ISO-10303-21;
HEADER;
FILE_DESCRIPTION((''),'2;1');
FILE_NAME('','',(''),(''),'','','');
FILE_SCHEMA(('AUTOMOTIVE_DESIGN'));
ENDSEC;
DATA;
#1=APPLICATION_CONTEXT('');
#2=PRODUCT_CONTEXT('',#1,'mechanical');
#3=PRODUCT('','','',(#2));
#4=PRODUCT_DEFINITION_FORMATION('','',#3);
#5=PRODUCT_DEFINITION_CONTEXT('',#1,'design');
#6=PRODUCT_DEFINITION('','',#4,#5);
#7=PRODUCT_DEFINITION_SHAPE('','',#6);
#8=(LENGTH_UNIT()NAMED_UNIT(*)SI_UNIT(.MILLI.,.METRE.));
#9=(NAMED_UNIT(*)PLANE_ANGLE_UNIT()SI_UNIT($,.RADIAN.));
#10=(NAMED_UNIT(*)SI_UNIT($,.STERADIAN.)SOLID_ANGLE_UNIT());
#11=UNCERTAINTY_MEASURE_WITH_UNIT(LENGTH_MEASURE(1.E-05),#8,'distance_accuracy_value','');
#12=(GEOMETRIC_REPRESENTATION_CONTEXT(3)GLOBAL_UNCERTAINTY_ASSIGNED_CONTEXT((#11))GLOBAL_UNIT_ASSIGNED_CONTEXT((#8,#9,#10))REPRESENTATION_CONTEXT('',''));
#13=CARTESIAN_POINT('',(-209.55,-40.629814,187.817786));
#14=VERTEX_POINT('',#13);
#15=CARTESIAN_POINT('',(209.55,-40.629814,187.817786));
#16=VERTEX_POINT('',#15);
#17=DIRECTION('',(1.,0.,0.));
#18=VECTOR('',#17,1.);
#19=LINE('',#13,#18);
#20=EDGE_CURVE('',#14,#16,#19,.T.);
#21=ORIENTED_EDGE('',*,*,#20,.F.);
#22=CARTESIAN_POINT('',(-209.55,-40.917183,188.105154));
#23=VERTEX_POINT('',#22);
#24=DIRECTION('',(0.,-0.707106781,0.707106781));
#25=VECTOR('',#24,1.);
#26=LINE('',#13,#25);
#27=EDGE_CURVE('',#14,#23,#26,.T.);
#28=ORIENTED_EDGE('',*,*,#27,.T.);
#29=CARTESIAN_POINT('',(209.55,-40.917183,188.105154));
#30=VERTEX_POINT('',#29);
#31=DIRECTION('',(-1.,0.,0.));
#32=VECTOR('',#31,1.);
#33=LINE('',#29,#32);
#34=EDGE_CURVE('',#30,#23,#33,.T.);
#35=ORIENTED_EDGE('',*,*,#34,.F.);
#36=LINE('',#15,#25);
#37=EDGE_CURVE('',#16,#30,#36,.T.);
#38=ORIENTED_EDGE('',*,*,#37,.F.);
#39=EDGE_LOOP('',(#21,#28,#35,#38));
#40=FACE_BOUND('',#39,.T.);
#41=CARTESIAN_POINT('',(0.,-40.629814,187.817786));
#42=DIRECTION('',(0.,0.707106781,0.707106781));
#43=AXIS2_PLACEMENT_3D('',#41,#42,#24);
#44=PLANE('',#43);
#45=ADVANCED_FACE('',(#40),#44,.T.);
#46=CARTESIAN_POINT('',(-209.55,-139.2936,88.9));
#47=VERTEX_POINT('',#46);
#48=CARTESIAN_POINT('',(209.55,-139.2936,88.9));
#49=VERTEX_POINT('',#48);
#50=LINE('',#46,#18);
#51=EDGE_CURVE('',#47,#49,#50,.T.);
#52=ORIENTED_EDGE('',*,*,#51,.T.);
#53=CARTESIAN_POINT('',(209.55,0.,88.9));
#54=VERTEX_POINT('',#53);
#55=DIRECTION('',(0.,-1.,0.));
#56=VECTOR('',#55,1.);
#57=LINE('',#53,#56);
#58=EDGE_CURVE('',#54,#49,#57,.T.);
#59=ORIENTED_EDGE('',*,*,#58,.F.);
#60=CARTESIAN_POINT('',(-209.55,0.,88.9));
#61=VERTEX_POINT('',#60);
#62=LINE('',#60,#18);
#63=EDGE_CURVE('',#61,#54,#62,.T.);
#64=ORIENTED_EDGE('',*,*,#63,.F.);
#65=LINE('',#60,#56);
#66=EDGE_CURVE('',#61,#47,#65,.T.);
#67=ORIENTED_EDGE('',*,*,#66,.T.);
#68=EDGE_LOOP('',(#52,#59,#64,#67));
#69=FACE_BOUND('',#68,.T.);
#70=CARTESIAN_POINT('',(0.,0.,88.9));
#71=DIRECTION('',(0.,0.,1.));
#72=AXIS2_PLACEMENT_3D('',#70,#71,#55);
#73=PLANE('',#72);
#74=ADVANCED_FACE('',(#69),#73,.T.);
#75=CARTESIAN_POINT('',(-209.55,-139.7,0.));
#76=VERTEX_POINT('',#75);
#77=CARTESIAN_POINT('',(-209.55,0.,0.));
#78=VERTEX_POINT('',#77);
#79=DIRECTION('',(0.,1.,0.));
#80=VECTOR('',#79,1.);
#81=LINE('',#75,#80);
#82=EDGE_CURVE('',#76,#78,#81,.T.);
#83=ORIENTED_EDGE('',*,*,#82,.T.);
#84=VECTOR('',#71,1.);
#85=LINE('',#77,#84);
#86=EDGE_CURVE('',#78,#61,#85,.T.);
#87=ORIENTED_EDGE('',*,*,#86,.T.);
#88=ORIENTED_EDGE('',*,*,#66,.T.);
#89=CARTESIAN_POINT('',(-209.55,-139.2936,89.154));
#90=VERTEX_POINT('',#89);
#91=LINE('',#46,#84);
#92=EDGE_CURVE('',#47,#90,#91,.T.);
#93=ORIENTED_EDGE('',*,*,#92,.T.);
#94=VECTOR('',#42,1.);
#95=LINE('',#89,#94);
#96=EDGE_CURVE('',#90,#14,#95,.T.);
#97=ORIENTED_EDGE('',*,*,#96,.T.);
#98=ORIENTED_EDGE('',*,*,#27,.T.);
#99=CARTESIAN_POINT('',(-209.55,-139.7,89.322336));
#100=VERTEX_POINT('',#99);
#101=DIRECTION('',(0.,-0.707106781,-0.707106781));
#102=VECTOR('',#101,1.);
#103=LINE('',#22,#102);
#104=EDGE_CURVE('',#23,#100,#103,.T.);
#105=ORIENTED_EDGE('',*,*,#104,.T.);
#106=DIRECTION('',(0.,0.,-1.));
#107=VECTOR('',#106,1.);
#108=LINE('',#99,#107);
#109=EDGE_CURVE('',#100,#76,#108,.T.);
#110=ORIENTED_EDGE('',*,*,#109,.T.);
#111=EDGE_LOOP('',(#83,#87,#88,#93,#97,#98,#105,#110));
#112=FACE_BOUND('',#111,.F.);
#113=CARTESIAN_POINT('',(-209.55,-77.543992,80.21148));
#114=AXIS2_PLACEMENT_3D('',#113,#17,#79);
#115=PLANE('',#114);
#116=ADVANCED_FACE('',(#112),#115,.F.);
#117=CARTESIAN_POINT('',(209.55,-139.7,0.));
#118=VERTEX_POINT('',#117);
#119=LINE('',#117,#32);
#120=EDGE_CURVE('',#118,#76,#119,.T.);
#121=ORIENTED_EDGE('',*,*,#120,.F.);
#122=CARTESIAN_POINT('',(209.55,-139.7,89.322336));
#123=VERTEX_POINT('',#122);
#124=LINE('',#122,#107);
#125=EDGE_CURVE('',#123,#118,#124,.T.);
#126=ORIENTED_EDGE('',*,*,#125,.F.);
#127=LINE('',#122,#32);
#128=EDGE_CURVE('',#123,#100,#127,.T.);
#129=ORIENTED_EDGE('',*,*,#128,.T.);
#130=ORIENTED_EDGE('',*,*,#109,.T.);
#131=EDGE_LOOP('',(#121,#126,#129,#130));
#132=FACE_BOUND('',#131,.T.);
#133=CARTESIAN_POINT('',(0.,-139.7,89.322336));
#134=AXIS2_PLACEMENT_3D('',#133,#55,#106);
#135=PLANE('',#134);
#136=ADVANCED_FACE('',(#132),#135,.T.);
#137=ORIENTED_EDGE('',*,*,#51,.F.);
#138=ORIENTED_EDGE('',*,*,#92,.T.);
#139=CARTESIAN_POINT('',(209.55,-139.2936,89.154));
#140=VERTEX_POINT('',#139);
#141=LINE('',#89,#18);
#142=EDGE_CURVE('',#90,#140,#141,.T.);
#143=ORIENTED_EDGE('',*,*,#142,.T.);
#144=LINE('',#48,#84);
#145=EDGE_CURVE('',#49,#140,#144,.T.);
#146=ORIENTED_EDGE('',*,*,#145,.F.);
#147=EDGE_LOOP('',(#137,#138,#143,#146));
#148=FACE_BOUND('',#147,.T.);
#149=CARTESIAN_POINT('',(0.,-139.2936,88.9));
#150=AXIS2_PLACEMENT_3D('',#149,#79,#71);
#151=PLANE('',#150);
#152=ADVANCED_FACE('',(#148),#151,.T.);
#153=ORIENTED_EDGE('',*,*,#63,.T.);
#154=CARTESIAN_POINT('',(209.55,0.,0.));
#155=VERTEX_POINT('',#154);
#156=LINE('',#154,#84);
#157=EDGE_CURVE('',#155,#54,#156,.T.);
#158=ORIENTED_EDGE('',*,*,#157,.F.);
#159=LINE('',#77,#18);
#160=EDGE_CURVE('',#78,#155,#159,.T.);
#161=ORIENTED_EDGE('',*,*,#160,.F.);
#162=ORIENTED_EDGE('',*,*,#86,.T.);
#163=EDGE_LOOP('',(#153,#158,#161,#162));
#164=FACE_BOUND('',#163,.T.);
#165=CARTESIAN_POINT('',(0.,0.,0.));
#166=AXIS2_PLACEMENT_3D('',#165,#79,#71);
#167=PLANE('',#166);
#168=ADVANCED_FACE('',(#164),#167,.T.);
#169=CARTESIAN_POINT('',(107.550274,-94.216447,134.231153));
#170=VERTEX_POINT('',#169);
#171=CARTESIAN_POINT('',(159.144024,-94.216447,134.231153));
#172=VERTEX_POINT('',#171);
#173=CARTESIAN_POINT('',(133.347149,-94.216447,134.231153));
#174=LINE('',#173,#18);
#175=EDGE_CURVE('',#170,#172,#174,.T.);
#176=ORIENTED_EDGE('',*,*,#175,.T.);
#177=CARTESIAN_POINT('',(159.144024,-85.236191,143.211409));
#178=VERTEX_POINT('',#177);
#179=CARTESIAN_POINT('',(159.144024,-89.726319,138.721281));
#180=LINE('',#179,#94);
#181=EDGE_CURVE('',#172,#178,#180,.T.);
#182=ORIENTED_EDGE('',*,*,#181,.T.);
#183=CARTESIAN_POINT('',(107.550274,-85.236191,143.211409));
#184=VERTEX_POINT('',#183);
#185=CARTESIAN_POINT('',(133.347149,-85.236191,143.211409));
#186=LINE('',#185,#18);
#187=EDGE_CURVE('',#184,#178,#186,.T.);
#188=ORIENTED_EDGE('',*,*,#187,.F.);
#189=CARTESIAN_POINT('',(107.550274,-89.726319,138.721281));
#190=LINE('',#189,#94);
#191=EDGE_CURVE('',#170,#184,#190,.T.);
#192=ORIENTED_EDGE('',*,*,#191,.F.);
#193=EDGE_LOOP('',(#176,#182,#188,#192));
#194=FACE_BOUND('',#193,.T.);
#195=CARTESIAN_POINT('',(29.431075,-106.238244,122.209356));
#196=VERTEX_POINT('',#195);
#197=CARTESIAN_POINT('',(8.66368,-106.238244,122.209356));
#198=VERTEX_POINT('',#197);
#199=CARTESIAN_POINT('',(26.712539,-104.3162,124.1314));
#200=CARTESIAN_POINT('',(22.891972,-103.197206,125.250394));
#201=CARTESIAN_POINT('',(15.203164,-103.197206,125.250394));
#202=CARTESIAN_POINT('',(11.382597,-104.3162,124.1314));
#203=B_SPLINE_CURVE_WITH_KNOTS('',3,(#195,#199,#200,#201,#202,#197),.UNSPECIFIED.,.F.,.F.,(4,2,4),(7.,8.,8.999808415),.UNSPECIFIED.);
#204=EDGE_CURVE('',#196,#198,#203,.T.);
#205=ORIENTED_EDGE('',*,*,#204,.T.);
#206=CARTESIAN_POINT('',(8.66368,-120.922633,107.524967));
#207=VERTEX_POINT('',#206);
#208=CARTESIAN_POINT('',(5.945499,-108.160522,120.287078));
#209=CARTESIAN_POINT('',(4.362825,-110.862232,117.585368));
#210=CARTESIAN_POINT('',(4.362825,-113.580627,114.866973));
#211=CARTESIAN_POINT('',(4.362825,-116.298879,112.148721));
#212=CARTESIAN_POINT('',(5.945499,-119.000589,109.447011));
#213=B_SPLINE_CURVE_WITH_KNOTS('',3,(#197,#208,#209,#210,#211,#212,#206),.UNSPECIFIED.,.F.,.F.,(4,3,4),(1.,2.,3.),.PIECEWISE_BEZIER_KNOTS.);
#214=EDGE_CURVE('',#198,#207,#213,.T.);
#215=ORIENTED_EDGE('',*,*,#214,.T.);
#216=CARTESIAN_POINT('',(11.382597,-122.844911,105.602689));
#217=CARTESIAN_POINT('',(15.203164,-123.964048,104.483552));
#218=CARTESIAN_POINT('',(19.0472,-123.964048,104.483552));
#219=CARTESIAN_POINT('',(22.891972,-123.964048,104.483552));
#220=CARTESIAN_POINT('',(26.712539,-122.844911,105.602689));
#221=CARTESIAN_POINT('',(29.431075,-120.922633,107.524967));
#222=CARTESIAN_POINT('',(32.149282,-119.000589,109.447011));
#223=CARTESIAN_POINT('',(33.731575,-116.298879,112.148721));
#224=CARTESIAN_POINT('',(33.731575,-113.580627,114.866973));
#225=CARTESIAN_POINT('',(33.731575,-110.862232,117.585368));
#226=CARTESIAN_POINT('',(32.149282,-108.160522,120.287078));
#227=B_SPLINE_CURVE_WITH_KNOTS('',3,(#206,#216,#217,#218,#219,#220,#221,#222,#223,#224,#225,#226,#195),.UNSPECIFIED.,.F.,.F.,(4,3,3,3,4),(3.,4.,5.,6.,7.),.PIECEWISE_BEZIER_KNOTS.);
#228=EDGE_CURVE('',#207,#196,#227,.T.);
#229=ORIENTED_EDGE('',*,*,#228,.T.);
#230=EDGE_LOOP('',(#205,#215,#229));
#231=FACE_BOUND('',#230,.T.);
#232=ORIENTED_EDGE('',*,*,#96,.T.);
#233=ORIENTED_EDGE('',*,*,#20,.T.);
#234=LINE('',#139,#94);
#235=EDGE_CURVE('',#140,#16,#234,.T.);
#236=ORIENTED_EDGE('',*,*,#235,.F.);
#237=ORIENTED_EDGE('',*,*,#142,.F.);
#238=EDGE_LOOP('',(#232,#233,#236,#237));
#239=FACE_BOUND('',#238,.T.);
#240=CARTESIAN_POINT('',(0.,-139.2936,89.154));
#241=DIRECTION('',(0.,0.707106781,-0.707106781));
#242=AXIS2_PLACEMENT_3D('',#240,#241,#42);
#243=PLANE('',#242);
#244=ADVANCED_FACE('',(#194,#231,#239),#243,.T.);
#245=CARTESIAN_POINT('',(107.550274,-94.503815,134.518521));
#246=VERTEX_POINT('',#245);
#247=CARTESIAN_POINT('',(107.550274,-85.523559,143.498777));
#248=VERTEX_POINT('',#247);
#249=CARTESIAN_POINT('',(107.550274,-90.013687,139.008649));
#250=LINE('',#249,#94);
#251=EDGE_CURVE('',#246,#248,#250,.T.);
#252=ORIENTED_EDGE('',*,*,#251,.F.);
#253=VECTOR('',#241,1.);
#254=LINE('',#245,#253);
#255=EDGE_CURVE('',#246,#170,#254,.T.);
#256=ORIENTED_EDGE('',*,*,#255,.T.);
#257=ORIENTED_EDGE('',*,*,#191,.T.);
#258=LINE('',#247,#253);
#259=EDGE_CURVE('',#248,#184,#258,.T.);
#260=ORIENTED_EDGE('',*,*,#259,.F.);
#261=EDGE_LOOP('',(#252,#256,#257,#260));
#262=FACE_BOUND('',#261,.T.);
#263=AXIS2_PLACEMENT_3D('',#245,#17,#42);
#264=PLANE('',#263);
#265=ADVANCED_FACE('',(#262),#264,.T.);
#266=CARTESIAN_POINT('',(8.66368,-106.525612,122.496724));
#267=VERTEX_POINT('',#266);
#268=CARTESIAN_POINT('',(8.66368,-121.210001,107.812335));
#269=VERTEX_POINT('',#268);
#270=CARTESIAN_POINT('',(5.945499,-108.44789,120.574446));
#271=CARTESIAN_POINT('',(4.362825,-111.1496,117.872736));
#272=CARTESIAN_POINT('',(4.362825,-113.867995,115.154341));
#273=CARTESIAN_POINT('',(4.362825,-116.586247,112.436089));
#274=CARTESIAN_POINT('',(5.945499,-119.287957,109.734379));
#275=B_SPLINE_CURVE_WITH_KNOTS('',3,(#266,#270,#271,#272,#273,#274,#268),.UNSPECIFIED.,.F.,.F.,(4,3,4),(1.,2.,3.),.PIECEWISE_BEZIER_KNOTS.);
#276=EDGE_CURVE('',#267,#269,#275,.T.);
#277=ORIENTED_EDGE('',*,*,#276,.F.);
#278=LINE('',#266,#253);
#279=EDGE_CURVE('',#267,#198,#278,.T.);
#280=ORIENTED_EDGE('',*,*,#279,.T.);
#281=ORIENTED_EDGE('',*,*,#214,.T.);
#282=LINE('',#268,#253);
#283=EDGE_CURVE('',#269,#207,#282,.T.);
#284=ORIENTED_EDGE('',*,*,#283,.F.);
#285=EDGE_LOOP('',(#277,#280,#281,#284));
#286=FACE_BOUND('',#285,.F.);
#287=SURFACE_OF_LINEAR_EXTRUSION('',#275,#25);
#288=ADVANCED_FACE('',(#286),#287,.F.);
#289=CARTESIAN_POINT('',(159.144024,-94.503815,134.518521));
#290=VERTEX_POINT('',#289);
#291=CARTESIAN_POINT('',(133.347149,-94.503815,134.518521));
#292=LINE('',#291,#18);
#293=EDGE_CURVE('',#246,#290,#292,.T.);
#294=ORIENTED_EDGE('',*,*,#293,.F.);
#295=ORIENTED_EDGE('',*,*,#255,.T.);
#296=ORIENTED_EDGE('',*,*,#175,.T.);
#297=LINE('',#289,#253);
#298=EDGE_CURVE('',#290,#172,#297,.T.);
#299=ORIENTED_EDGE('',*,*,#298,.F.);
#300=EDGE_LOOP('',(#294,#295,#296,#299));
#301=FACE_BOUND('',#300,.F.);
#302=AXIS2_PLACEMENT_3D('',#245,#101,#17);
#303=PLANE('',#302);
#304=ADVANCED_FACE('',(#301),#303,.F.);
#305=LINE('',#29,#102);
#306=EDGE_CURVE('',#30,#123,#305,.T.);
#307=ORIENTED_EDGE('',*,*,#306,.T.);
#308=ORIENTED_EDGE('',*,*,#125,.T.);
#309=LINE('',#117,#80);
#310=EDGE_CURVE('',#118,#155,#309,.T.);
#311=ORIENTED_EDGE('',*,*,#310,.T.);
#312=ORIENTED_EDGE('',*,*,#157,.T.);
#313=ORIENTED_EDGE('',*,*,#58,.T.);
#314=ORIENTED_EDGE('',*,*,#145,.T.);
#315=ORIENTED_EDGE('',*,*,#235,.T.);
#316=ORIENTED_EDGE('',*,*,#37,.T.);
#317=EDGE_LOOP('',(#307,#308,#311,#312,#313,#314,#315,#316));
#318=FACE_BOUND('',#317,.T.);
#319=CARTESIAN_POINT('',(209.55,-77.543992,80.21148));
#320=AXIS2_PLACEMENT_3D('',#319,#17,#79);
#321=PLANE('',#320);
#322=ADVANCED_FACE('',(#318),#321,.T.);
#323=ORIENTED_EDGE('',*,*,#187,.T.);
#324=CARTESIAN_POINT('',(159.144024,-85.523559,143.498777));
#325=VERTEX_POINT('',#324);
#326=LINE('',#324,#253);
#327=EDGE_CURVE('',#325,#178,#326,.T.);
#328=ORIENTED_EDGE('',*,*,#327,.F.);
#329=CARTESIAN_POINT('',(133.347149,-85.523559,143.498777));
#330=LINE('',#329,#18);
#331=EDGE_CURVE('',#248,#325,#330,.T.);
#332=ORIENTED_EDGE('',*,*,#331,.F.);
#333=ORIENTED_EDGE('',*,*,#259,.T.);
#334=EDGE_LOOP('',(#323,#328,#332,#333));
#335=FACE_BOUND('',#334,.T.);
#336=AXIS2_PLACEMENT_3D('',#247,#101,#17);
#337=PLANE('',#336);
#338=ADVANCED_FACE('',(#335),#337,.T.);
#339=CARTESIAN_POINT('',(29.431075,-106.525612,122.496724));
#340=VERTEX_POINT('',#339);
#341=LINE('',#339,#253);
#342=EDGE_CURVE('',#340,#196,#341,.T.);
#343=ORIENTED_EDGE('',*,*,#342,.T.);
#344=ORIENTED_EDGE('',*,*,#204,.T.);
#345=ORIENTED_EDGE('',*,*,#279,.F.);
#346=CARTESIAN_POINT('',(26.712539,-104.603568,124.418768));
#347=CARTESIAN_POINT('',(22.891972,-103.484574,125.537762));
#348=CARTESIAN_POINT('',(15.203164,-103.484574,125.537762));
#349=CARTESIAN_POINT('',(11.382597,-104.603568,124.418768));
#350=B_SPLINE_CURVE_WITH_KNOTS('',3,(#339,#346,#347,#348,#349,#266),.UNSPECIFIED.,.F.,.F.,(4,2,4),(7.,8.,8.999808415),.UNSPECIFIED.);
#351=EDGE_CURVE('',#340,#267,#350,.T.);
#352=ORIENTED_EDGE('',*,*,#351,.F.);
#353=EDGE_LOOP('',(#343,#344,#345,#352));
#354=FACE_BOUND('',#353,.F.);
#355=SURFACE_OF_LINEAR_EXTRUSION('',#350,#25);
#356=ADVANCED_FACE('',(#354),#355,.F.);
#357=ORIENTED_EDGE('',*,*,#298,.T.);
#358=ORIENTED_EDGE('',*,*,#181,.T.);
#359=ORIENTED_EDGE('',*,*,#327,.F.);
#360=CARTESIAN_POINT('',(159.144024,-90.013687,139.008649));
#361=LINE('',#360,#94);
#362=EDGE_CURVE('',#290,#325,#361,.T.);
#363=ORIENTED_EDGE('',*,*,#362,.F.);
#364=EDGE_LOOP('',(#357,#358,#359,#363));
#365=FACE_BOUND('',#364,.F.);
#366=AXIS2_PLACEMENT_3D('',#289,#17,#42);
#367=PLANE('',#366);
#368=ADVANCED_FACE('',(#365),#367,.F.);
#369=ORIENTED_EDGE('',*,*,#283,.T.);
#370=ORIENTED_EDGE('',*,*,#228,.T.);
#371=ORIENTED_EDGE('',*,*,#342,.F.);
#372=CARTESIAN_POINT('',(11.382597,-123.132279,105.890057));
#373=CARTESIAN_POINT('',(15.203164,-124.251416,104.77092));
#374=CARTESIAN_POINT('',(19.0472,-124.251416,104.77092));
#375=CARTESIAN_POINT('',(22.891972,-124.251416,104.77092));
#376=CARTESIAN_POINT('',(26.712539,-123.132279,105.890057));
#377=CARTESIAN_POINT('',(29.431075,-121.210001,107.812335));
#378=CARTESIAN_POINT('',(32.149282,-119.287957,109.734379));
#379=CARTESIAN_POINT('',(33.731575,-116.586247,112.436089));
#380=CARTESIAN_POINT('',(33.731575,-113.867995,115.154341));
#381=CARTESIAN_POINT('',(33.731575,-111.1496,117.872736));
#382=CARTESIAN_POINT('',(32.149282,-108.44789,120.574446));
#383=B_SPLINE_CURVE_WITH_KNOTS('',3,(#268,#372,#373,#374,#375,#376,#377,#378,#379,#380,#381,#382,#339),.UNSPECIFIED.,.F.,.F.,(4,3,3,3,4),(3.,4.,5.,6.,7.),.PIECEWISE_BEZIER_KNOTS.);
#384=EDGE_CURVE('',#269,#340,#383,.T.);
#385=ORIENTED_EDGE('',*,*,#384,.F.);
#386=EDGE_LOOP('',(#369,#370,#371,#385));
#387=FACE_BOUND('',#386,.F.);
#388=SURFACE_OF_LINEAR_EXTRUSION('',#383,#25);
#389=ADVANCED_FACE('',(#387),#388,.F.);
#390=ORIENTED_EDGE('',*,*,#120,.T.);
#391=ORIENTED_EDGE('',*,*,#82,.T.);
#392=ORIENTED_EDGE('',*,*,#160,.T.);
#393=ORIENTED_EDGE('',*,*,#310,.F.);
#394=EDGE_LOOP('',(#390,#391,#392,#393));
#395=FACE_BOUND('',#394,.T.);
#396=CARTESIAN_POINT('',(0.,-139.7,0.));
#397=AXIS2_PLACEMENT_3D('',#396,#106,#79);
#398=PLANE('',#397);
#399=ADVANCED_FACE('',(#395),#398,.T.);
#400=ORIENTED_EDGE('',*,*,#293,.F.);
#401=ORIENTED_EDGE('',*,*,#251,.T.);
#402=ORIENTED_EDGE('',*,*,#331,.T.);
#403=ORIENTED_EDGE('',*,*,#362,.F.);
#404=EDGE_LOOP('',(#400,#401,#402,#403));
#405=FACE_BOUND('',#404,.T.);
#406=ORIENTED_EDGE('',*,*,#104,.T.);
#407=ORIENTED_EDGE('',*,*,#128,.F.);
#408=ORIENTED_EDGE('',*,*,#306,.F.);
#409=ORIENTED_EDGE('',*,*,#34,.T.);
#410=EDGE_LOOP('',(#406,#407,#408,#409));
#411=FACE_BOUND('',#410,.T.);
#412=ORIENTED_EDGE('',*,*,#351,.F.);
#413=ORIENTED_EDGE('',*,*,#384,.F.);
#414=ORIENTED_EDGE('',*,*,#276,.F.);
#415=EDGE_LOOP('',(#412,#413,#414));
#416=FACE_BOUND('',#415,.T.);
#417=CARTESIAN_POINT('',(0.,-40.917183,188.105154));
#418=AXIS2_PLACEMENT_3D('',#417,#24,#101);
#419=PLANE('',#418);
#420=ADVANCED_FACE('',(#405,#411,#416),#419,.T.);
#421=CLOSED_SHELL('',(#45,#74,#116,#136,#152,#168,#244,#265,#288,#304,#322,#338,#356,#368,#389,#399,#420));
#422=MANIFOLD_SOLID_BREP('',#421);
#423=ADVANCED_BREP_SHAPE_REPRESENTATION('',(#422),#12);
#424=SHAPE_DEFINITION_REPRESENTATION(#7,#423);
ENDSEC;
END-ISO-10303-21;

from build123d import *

# Parameters (mm, degrees)
F1_DEPTH = 209.55
F2_W     = 51.59375
F2_H     = 12.7
F3_DEPTH = 0.4064


# Not quite as in the source:
# - the dataset's text gives a spline's control points without its knots; the knots are read off the source's solid


with BuildPart() as f1:
    # F0 (on Right) → F1 (new body, symmetric)
    with BuildSketch(Plane.YZ):
        Polygon((-139.7, 0), (0, 0), (0, 88.9), (-139.2936, 88.9), (-139.2936, 89.154), (-40.6298144724, 187.8177855276), (-40.9171826682, 188.1051537235), (-139.7, 89.3223363917), align=None)
    extrude(amount=F1_DEPTH, both=True)

    # F2 (on face) → F3 (cut, through all)
    with BuildSketch(Plane(origin=(0, -114.5111681959, 114.5111681959), x_dir=(1, 0, 0), z_dir=(0, -0.7071067812, 0.7071067812))):
        with Locations((133.3471488731, 34.6446699547)):
            Rectangle(F2_W, F2_H)
        with BuildLine():
            add(Edge.make_bspline(
                [(29.4310752731, 11.2932815547), (26.7125386731, 14.0114625547), (22.8919722731, 15.5939587547), (19.0471996731, 15.5939587547)],
                knots=[7, 7, 7, 7, 8, 8, 8, 8], degree=3))
            add(Edge.make_bspline(
                [(19.0471996731, 15.5939587547), (15.2031636731, 15.5939587547), (11.3825972731, 14.0114625547), (8.6636796731, 11.2932815547)],
                knots=[0, 0, 0, 0, 1, 1, 1, 1], degree=3))
            add(Edge.make_bspline(
                [(8.6636796731, 11.2932815547), (5.9454986731, 8.5747703547), (4.3628246731, 4.7539753547), (4.3628246731, 0.9095837547), (4.3628246731, -2.9346046453), (5.9454986731, -6.7553996453), (8.6636796731, -9.4735806453)],
                knots=[1, 1, 1, 1, 2, 2, 2, 3, 3, 3, 3], degree=3))
            add(Edge.make_bspline(
                [(8.6636796731, -9.4735806453), (11.3825972731, -12.1920918453), (15.2031636731, -13.7747912453), (19.0471996731, -13.7747912453), (22.8919722731, -13.7747912453), (26.7125386731, -12.1920918453), (29.4310752731, -9.4735806453), (32.1492816731, -6.7553996453), (33.7315746731, -2.9346046453), (33.7315746731, 0.9095837547), (33.7315746731, 4.7539753547), (32.1492816731, 8.5747703547), (29.4310752731, 11.2932815547)],
                knots=[3, 3, 3, 3, 4, 4, 4, 5, 5, 5, 6, 6, 6, 7, 7, 7, 7], degree=3))
        make_face()
    extrude(amount=-F3_DEPTH, mode=Mode.SUBTRACT)


solid = f1.part
